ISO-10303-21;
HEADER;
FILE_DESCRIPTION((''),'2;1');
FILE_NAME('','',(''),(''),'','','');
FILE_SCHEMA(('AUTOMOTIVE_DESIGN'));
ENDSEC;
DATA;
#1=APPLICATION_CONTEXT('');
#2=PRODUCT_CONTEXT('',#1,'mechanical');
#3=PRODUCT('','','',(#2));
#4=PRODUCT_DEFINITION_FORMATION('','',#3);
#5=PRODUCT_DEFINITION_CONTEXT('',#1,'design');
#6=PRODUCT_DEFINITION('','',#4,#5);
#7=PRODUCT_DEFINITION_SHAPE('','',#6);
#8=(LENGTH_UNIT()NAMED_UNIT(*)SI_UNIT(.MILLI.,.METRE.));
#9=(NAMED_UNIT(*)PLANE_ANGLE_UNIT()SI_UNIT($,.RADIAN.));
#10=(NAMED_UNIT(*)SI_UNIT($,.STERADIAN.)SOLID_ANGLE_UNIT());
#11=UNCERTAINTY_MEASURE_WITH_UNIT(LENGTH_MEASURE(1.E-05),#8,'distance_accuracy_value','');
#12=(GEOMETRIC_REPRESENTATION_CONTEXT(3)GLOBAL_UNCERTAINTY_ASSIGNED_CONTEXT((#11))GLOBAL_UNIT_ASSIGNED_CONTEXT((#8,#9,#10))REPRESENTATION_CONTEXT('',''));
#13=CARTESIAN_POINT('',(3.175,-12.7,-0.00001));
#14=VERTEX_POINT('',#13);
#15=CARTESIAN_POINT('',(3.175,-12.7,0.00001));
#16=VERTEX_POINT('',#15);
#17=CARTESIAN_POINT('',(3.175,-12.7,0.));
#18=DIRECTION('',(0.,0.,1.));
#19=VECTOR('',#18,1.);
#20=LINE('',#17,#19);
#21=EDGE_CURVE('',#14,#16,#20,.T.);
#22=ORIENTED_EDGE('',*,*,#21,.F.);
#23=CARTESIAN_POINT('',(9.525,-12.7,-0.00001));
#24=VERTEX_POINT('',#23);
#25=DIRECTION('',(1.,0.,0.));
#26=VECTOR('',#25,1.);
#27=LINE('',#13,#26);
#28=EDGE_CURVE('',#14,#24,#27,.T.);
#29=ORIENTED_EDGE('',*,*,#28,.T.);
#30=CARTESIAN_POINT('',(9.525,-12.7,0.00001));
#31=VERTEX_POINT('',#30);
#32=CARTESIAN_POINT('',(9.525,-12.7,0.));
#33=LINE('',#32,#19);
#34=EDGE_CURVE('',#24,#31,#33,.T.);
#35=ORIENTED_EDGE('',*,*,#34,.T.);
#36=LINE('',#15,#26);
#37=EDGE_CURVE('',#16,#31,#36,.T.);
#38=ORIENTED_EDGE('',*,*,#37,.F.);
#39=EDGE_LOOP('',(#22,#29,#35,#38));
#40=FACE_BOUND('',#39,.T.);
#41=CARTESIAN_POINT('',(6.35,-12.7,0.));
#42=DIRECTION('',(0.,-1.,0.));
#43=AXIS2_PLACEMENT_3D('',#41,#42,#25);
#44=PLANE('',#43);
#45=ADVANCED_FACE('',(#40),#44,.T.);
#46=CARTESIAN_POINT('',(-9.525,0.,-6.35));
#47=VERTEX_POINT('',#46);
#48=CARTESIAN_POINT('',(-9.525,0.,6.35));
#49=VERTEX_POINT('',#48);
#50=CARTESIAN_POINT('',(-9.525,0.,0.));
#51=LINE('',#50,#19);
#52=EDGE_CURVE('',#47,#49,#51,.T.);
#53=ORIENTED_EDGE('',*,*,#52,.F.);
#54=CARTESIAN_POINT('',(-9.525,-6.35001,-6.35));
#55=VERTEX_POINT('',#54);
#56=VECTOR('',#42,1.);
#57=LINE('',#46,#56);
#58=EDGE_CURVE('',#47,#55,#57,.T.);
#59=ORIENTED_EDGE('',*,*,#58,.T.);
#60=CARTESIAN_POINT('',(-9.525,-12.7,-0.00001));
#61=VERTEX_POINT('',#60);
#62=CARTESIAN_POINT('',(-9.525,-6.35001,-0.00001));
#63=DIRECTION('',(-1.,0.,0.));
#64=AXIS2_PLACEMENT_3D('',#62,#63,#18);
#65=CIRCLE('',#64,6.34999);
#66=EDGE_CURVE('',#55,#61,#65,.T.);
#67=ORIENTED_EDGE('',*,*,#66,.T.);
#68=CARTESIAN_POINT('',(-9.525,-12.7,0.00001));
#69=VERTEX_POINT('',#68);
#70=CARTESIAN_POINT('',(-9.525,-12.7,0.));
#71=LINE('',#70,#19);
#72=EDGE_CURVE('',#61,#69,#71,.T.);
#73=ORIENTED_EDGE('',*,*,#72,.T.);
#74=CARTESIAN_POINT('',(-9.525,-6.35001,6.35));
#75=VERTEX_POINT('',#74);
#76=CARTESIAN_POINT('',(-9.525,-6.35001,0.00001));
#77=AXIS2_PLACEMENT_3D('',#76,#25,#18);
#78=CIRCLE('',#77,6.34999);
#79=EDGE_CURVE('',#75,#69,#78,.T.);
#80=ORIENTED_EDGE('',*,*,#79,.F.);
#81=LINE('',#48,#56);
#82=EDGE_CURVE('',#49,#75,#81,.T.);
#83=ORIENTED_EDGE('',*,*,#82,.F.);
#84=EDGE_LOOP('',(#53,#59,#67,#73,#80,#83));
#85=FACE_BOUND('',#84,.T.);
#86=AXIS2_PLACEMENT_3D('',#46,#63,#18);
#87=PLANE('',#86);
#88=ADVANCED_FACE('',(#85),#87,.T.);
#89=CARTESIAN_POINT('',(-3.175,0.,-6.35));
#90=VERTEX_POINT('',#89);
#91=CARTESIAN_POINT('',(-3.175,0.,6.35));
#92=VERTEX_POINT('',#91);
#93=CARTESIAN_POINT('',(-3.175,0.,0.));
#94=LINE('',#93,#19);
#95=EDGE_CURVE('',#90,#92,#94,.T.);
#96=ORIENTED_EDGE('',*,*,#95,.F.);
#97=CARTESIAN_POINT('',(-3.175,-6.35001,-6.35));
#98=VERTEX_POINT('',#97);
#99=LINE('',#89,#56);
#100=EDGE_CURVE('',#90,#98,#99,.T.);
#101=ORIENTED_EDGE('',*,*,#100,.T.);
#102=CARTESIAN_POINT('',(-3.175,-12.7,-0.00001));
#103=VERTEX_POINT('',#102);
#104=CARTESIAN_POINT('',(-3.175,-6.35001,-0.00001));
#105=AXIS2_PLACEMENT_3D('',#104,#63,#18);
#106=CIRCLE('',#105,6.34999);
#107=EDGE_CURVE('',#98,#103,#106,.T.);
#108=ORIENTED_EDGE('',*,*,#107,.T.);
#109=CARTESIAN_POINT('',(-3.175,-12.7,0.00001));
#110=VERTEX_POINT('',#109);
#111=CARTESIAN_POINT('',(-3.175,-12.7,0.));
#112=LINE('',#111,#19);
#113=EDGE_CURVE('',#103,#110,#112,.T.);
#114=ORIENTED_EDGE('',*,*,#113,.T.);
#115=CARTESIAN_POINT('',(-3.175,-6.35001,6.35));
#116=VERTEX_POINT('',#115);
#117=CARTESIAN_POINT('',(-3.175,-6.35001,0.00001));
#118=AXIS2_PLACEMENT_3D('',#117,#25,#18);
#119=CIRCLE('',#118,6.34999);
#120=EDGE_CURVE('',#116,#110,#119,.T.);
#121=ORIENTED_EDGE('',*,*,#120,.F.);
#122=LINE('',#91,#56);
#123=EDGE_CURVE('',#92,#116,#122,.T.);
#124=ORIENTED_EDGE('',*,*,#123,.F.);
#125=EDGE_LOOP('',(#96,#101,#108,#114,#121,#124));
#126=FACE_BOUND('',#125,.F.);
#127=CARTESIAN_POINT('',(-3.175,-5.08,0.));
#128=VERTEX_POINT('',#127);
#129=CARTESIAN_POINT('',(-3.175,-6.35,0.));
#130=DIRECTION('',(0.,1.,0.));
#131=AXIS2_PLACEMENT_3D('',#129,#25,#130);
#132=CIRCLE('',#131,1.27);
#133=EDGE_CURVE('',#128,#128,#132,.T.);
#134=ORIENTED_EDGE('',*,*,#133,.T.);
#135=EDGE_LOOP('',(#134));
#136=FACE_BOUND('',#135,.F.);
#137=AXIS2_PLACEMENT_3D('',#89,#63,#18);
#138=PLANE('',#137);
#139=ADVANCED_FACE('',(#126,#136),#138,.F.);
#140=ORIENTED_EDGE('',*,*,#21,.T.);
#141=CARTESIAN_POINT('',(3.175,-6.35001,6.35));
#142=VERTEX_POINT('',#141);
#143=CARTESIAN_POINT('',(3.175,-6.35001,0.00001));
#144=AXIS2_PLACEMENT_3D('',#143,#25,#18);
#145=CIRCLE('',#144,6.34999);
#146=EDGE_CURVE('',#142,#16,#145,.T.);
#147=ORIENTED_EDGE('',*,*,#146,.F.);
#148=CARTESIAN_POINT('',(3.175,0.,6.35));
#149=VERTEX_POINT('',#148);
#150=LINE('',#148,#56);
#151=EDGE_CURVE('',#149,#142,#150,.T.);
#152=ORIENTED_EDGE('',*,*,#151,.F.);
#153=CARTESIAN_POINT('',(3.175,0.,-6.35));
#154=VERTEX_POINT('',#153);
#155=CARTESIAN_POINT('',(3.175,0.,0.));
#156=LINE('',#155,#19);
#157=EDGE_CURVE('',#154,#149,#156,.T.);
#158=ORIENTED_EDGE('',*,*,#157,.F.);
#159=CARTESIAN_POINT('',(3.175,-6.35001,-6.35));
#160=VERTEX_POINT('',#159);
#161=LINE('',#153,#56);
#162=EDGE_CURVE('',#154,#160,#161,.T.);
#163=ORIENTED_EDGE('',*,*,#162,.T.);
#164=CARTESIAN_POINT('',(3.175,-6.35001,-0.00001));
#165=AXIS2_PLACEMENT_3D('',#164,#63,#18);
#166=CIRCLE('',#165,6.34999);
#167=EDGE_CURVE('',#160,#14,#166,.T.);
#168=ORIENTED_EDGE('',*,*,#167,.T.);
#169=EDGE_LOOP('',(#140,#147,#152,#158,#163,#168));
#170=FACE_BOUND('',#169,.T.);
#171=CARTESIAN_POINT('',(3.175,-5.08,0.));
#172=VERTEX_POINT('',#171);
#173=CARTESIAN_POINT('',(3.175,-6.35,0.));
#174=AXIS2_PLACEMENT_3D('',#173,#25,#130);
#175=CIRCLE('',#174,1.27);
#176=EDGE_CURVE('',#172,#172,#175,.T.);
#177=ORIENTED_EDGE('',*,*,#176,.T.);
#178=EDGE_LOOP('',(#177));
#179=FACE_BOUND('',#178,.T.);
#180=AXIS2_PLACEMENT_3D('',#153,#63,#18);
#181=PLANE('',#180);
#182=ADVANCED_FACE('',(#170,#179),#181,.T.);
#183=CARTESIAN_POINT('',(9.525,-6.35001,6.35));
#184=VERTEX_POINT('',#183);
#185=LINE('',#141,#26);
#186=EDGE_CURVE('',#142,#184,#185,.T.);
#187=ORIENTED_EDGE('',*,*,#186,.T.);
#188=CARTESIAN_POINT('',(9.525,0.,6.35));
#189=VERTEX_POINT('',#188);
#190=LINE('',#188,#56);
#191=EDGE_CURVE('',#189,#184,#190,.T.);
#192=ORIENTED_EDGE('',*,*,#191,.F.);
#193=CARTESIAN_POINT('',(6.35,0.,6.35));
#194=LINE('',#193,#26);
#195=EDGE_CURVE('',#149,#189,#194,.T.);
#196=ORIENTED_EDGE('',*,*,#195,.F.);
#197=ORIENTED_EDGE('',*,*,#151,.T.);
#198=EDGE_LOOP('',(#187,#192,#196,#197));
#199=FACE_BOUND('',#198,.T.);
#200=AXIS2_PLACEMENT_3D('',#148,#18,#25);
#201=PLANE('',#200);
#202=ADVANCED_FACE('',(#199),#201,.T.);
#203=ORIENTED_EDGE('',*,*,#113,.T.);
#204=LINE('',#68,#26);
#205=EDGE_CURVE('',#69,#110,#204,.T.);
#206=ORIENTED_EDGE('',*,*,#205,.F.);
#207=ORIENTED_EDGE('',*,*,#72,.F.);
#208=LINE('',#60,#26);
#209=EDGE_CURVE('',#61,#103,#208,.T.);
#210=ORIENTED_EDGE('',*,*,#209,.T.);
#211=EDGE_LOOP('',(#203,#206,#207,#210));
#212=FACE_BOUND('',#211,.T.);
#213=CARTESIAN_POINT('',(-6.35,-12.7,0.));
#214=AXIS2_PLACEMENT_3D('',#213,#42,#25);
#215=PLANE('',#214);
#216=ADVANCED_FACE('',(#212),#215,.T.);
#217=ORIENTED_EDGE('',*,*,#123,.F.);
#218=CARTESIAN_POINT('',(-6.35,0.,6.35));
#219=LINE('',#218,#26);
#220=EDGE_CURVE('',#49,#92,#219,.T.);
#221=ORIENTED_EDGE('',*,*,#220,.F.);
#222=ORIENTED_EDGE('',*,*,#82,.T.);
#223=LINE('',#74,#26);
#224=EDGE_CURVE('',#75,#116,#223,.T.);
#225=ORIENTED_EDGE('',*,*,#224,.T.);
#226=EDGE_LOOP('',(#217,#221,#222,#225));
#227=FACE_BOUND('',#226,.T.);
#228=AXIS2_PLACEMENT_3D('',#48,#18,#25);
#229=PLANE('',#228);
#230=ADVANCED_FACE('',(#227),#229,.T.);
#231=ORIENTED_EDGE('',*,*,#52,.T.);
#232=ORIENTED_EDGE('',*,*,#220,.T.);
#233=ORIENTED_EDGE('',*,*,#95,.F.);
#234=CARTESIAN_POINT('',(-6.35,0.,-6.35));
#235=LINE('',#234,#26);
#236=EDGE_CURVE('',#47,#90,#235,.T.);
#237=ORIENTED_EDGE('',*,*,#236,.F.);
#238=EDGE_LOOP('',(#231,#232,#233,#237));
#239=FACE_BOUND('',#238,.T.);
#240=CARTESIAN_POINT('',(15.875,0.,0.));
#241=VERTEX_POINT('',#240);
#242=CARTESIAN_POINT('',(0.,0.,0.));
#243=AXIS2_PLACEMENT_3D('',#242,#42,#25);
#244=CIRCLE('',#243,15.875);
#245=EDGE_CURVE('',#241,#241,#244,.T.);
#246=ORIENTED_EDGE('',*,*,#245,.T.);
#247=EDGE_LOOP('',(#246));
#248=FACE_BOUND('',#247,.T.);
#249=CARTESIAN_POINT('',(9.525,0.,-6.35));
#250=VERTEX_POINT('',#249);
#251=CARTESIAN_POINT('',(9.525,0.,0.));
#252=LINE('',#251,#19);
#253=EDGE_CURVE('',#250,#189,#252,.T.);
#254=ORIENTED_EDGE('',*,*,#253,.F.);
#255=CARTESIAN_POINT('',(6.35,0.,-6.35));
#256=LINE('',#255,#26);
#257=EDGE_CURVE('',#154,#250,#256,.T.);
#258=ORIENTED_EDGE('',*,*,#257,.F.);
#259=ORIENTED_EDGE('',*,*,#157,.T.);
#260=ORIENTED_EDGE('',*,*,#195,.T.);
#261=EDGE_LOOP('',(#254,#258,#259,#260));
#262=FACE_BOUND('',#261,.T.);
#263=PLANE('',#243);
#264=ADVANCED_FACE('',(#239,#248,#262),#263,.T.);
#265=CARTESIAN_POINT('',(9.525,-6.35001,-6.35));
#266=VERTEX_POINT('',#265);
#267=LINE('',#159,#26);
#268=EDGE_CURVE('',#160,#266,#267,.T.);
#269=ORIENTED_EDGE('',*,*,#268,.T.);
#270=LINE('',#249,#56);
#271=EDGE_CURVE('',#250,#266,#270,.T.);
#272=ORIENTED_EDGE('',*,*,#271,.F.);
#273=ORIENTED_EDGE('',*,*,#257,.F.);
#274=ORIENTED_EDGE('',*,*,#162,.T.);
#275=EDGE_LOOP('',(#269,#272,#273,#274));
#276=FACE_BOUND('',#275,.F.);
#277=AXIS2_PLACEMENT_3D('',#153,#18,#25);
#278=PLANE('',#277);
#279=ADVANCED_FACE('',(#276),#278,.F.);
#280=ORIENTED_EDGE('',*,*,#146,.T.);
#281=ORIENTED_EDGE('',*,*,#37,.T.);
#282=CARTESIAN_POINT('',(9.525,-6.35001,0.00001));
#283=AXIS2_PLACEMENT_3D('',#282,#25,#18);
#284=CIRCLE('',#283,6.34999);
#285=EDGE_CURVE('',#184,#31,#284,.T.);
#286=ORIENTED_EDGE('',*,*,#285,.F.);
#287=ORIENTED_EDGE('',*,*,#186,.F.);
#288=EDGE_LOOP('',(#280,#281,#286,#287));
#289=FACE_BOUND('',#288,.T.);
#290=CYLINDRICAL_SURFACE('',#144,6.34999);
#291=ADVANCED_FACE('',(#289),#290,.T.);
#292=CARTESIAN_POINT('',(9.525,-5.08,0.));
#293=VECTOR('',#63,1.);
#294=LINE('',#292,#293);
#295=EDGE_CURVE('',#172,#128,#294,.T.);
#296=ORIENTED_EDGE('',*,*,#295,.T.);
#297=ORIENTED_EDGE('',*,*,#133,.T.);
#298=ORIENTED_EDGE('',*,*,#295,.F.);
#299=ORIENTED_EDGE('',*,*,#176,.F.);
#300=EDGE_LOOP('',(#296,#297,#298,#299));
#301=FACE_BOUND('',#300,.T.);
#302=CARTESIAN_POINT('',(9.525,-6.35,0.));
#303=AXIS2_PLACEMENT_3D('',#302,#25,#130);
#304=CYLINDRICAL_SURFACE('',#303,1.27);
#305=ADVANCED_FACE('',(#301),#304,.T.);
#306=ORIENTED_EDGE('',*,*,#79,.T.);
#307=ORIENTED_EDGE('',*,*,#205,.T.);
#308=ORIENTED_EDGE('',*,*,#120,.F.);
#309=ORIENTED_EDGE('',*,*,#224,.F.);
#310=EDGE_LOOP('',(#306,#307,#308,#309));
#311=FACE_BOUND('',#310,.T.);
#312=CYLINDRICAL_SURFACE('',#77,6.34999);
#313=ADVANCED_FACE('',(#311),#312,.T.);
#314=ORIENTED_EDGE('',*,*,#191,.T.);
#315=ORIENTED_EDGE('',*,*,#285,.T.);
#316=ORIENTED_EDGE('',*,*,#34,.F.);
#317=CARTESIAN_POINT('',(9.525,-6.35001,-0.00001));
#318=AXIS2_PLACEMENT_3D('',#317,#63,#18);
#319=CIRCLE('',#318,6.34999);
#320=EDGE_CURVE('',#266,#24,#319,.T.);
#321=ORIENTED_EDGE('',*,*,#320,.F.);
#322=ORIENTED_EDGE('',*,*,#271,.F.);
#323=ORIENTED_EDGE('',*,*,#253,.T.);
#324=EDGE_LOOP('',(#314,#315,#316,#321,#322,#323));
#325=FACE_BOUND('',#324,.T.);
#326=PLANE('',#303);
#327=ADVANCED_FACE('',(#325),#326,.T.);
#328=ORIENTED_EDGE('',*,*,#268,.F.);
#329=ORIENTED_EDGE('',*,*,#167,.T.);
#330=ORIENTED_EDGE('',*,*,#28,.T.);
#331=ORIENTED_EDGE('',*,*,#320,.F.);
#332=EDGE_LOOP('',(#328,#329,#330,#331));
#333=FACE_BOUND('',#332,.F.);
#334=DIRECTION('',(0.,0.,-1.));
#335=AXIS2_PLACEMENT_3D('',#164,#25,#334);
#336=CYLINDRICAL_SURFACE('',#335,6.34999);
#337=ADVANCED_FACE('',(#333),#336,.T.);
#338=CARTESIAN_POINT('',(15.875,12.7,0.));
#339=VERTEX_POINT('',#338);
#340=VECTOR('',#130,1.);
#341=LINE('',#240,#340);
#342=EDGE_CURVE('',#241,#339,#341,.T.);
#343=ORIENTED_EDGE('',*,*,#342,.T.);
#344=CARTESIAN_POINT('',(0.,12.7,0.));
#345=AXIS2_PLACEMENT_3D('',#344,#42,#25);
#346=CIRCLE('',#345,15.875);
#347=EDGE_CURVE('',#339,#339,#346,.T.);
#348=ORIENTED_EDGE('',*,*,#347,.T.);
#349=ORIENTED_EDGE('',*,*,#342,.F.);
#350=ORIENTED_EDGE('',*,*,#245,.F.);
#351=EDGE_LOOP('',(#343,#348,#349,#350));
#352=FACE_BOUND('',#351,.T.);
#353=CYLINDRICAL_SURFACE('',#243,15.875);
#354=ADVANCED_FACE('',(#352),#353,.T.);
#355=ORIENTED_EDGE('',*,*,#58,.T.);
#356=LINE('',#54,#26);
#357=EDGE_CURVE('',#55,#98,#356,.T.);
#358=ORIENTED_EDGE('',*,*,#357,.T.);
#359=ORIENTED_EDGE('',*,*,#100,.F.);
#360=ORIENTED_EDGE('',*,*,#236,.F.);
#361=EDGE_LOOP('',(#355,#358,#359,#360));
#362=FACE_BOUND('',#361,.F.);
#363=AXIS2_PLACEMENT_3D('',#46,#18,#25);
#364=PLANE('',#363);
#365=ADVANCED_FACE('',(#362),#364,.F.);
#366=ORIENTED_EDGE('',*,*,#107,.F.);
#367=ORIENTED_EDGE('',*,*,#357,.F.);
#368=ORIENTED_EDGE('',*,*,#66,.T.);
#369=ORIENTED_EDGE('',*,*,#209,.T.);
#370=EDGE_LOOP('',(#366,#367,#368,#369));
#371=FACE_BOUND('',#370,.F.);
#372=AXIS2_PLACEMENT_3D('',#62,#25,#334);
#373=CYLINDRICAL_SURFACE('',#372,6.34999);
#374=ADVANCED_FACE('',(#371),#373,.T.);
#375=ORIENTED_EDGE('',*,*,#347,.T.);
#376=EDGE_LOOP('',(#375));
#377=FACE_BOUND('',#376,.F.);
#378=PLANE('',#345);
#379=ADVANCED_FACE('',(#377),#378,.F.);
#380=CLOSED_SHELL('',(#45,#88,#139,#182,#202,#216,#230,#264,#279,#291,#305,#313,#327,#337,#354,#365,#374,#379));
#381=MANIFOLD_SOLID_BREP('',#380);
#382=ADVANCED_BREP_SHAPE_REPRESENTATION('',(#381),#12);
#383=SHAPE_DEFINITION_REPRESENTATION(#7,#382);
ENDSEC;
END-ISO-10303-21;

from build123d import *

# Parameters (mm, degrees)
F0_R     = 15.875
F1_DEPTH = 12.7
F2_W     = 6.35
F2_H     = 12.7
F3_DEPTH = 12.7
F4_R     = 6.34999
F5_R     = 1.27
F6_DEPTH = 19.05


# Not quite as in the source:
# - a fillet or chamfer is up to 0.001 mm smaller than in the source, because OpenCascade refuses the exact size


with BuildPart() as f1:
    # F0 (on Front) → F1 (new body)
    with BuildSketch(Plane.XZ):
        Circle(F0_R)
    extrude(amount=-F1_DEPTH)

    # F2 (on face) → F3 (join)
    with BuildSketch(Plane.XZ):
        with Locations((-6.35, 0)):
            Rectangle(F2_W, F2_H)
        with Locations((6.35, 0)):
            Rectangle(F2_W, F2_H)
    extrude(amount=F3_DEPTH)

    # F4 (radius 6.35 in the source; OpenCascade refuses exactly that, so slightly less here)
    f4_edges = [f1.edges().sort_by_distance(p)[0] for p in [
        (-6.35, -12.7, 6.35),
        (6.35, -12.7, 6.35),
        (-6.35, -12.7, -6.35),
        (6.35, -12.7, -6.35),
    ]]
    fillet(f4_edges, radius=F4_R)

    # F5 (on face) → F6 (join)
    with BuildSketch(Plane.YZ.offset(9.525)):
        with Locations((-6.35, 0)):
            Circle(F5_R)
    extrude(amount=-F6_DEPTH)


solid = f1.part
